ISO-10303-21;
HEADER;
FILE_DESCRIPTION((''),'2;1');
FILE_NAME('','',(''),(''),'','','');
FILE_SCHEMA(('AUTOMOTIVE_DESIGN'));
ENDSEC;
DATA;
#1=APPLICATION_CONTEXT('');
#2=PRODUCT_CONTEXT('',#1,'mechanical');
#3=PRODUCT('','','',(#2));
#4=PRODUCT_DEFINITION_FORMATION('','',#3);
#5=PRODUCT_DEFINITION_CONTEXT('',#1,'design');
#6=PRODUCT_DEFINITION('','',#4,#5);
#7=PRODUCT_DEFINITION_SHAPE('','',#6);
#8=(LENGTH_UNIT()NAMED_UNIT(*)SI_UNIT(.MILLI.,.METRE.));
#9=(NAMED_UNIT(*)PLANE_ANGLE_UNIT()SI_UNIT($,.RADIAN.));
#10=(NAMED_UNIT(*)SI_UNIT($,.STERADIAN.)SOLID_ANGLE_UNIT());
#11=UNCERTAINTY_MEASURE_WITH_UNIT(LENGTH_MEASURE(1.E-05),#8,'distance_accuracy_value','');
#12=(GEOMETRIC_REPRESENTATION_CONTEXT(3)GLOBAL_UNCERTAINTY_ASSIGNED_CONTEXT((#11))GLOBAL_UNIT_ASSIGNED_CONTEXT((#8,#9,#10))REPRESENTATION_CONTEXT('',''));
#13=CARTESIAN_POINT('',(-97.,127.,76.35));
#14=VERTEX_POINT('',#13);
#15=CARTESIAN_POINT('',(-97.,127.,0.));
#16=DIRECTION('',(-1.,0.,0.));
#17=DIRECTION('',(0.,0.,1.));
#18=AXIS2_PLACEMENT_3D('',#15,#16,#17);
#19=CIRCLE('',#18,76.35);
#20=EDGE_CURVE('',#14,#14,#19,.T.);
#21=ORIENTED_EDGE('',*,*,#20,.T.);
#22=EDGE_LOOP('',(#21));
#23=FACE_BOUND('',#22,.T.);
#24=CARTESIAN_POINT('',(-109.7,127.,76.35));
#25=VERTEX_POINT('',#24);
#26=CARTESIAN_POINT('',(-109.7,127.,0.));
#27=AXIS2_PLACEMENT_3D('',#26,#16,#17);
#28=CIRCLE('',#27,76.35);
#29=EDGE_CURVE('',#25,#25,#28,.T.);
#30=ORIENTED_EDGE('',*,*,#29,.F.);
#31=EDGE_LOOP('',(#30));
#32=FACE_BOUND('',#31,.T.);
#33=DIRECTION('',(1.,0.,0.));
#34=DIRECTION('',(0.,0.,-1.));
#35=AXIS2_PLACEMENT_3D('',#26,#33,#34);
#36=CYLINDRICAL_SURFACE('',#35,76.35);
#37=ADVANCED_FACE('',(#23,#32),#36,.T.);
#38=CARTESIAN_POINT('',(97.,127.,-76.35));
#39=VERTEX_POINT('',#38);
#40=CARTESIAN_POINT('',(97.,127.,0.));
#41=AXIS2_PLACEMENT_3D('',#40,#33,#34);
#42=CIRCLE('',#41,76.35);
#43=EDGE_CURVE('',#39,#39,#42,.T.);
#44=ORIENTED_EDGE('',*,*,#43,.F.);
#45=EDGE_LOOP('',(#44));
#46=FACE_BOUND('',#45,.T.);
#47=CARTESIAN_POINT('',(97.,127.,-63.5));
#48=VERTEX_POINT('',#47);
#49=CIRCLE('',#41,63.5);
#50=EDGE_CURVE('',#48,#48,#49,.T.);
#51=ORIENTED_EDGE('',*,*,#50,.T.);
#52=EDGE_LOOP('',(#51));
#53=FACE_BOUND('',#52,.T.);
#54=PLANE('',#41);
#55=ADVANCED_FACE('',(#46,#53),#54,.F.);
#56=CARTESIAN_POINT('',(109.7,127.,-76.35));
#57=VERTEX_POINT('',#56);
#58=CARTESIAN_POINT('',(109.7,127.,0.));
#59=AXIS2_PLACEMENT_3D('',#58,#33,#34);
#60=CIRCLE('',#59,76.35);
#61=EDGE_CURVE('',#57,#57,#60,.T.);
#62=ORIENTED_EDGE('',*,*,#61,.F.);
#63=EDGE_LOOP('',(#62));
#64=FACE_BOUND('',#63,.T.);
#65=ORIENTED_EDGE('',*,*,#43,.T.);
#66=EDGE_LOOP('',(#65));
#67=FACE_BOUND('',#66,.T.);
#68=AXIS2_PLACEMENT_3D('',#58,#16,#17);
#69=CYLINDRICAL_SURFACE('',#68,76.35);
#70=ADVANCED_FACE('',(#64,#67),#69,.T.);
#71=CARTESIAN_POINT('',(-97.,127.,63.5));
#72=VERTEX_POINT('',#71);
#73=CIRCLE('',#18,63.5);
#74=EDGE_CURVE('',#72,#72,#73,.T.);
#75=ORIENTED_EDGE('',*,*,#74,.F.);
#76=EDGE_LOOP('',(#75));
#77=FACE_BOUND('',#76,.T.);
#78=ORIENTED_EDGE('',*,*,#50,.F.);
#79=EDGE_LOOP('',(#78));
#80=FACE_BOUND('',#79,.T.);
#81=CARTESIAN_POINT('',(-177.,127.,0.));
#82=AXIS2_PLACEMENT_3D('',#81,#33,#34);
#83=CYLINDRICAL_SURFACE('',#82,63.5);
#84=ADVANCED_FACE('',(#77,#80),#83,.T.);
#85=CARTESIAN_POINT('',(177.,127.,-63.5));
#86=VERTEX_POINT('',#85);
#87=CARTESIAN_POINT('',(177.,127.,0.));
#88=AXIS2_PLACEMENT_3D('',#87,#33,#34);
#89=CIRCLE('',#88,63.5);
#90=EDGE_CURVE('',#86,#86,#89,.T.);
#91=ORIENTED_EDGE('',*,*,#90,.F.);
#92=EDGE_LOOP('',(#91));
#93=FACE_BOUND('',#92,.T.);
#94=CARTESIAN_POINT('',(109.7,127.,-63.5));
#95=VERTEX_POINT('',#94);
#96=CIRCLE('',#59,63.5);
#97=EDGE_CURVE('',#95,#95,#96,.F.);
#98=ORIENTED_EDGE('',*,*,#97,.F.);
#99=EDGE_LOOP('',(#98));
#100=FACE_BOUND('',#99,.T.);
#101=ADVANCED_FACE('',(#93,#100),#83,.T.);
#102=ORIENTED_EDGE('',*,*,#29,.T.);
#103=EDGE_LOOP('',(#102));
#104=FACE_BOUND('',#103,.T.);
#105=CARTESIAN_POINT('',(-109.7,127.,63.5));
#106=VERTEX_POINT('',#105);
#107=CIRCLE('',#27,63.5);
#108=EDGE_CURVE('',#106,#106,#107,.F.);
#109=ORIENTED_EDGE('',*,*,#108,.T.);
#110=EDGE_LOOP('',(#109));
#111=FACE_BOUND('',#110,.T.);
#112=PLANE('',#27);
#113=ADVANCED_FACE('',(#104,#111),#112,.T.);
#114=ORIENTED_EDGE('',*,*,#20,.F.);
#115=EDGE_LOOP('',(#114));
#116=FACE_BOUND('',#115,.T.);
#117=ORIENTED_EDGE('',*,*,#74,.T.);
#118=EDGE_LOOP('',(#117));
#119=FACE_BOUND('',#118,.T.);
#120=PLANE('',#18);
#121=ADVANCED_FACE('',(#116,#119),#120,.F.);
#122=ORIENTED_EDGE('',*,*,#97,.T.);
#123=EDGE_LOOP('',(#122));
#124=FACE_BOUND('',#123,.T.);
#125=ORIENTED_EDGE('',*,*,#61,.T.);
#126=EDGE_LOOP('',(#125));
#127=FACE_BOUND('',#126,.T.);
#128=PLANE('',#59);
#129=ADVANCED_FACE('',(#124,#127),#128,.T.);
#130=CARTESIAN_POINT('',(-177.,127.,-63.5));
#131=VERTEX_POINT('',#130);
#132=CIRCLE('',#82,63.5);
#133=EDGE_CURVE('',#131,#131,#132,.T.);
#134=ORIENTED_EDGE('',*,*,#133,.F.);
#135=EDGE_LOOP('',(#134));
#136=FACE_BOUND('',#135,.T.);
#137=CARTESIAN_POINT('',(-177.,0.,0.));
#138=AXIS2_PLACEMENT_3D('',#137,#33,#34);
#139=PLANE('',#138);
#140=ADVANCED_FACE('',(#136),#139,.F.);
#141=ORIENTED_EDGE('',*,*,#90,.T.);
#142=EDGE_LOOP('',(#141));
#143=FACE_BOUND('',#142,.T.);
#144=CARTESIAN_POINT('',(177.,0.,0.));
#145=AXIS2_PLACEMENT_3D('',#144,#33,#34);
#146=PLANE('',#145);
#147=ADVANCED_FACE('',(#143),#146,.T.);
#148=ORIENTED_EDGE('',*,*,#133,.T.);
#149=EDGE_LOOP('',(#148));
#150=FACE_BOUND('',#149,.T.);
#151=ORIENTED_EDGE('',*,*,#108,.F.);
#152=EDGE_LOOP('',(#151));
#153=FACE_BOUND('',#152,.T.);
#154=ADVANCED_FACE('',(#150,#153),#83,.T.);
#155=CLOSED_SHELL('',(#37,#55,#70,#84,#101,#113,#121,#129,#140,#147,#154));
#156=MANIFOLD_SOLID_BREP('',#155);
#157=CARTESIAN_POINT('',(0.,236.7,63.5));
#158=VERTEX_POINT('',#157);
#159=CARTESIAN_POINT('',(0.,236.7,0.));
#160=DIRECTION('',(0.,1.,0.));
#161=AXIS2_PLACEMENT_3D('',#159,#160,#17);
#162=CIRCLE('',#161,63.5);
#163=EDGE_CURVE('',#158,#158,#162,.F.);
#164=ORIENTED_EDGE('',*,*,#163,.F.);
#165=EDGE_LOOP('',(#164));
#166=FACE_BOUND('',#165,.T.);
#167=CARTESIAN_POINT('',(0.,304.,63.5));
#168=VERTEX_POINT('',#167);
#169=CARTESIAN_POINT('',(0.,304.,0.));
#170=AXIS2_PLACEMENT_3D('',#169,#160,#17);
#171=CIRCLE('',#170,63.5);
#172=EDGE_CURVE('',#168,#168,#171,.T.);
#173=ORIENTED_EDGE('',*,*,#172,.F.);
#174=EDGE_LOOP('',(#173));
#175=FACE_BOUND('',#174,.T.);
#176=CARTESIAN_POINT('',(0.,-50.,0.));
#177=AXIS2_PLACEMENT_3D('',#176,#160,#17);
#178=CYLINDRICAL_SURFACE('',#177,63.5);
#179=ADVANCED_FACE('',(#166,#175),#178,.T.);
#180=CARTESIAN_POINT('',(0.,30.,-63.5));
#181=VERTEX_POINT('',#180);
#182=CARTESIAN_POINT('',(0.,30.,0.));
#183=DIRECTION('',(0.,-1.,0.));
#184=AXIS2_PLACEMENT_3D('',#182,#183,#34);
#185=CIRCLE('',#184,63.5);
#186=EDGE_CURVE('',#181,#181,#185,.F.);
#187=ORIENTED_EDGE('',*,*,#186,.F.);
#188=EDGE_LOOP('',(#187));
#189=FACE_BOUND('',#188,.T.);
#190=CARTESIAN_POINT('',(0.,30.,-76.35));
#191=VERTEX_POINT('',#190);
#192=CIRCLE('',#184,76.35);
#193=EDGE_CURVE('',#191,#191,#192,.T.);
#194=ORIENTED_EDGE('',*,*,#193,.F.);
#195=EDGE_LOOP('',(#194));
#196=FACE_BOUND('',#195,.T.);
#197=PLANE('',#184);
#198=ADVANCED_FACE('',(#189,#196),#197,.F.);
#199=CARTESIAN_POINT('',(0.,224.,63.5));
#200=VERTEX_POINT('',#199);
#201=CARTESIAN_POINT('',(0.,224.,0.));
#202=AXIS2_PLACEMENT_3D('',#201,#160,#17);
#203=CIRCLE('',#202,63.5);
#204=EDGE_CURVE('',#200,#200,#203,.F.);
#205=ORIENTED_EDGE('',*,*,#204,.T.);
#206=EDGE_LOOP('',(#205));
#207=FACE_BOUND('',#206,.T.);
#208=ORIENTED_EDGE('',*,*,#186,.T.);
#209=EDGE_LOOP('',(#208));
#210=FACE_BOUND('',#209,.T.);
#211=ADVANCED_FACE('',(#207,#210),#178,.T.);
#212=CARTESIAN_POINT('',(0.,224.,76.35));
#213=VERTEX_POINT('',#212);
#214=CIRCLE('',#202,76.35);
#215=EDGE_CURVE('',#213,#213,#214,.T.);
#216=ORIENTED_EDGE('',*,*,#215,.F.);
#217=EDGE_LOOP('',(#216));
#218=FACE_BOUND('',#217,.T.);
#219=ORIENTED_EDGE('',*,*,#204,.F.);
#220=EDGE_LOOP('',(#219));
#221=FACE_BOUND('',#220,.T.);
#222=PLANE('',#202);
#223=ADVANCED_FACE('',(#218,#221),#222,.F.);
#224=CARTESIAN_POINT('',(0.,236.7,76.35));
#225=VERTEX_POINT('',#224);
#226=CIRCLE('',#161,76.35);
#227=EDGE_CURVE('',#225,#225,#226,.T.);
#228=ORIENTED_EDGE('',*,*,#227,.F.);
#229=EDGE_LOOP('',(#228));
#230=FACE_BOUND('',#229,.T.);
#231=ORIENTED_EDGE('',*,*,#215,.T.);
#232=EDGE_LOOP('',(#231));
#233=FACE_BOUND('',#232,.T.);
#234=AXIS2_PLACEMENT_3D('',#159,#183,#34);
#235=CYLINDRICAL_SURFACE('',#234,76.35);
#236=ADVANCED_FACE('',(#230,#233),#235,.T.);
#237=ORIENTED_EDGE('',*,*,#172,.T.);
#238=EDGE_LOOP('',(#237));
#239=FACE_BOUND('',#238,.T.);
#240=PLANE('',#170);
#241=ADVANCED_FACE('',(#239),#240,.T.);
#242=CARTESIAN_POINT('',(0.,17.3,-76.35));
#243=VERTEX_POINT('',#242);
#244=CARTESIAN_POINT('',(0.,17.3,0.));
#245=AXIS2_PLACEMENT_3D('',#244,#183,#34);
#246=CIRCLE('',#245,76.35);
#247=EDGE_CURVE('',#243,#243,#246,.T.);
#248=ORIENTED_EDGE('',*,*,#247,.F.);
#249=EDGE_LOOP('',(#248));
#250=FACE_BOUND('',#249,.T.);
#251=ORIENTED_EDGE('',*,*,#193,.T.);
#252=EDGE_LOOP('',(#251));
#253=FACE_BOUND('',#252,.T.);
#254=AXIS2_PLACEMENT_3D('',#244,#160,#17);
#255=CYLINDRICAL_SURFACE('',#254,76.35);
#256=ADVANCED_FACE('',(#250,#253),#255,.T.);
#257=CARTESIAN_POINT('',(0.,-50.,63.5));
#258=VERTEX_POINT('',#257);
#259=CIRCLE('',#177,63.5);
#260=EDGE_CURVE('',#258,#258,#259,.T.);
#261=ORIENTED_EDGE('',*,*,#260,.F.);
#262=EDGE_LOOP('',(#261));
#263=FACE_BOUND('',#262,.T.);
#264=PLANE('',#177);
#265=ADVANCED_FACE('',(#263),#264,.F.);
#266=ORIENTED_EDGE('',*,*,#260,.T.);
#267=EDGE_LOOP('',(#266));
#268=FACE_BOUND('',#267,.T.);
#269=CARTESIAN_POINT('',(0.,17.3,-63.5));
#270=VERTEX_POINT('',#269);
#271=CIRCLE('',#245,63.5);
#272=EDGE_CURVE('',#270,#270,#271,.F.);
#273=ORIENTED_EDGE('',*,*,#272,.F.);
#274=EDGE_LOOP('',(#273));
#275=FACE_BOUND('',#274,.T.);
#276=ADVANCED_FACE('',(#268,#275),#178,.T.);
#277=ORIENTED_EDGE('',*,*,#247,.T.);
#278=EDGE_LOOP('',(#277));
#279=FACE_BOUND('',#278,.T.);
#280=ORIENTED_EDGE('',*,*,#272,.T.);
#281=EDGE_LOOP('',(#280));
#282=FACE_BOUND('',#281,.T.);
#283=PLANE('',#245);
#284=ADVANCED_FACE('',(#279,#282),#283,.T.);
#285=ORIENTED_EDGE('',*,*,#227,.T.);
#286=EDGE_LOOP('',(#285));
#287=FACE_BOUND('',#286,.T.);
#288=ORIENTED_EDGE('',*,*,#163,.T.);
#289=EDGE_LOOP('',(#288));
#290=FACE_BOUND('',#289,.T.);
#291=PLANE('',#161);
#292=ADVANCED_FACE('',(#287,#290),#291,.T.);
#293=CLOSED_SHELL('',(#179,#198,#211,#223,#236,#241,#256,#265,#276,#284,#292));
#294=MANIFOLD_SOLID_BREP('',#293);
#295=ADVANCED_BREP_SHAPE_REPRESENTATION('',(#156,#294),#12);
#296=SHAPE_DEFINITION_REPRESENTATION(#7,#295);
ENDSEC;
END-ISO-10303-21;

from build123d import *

# Parameters (mm, degrees)
BOSS_EXTRUDE1_DEPTH      = 304
BOSS_EXTRUDE1_DEPTH_BACK = 50
SKETCH1_R                = 63.5
BOSS_EXTRUDE2_DEPTH      = 177
BOSS_EXTRUDE2_DEPTH_BACK = 177
BOSS_EXTRUDE3_START      = -80
SKETCH5_R                = 76.35
SKETCH5_R_2              = 63.5
BOSS_EXTRUDE3_DEPTH      = 12.7
BOSS_EXTRUDE4_START      = -80
SKETCH6_R                = 76.35
BOSS_EXTRUDE4_DEPTH      = 12.7
BOSS_EXTRUDE5_START      = -80
SKETCH7_R                = 76.35
SKETCH7_R_2              = 63.5
BOSS_EXTRUDE5_DEPTH      = 12.7
BOSS_EXTRUDE6_START      = -67.3
SKETCH8_R                = 76.35
BOSS_EXTRUDE6_DEPTH      = 12.7


with BuildPart() as part:
    # Sketch1 → Boss-Extrude1 (new, two sides: drawn at the far end of the back side and taken through both)
    with BuildSketch(Plane(origin=(0, 0, 0), x_dir=(1, 0, 0), z_dir=(0, 1, 0)).offset(-BOSS_EXTRUDE1_DEPTH_BACK)):
        Circle(SKETCH1_R)
    extrude(amount=BOSS_EXTRUDE1_DEPTH + BOSS_EXTRUDE1_DEPTH_BACK)

    # Sketch6 → Boss-Extrude4 (add)
    with BuildSketch(Plane.XZ.offset(50).offset(BOSS_EXTRUDE4_START)):
        Circle(SKETCH6_R)
    extrude(amount=BOSS_EXTRUDE4_DEPTH)

    # Sketch8 → Boss-Extrude6 (add)
    with BuildSketch(Plane(origin=(0, 304, 0), x_dir=(1, 0, 0), z_dir=(0, 1, 0)).offset(BOSS_EXTRUDE6_START)):
        Circle(SKETCH8_R)
    extrude(amount=-BOSS_EXTRUDE6_DEPTH)


with BuildPart() as body_2:
    # Sketch3 → Boss-Extrude2 (new, two sides: drawn at the far end of the back side and taken through both)
    with BuildSketch(Plane(origin=(0, 0, 0), x_dir=(0, 0, -1), z_dir=(1, 0, 0)).offset(-BOSS_EXTRUDE2_DEPTH_BACK)):
        with BuildLine():
            ThreePointArc((0, 63.5), (44.901280605, 82.098719395), (63.5, 127))
            ThreePointArc((63.5, 127), (-44.901280605, 171.901280605), (0, 63.5))
        make_face()
    extrude(amount=BOSS_EXTRUDE2_DEPTH + BOSS_EXTRUDE2_DEPTH_BACK)

    # Sketch5 → Boss-Extrude3 (add)
    with BuildSketch(Plane(origin=(177, 0, 0), x_dir=(0, 0, -1), z_dir=(1, 0, 0)).offset(BOSS_EXTRUDE3_START)):
        with Locations((0, 127)):
            Circle(SKETCH5_R)
        with Locations((0, 127)):
            Circle(SKETCH5_R_2, mode=Mode.SUBTRACT)
    extrude(amount=BOSS_EXTRUDE3_DEPTH)

    # Sketch7 → Boss-Extrude5 (add)
    with BuildSketch(Plane.ZY.offset(177).offset(BOSS_EXTRUDE5_START)):
        with Locations((0, 127)):
            Circle(SKETCH7_R)
        with Locations((0, 127)):
            Circle(SKETCH7_R_2, mode=Mode.SUBTRACT)
    extrude(amount=BOSS_EXTRUDE5_DEPTH)


solid = Compound([part.part, body_2.part])
